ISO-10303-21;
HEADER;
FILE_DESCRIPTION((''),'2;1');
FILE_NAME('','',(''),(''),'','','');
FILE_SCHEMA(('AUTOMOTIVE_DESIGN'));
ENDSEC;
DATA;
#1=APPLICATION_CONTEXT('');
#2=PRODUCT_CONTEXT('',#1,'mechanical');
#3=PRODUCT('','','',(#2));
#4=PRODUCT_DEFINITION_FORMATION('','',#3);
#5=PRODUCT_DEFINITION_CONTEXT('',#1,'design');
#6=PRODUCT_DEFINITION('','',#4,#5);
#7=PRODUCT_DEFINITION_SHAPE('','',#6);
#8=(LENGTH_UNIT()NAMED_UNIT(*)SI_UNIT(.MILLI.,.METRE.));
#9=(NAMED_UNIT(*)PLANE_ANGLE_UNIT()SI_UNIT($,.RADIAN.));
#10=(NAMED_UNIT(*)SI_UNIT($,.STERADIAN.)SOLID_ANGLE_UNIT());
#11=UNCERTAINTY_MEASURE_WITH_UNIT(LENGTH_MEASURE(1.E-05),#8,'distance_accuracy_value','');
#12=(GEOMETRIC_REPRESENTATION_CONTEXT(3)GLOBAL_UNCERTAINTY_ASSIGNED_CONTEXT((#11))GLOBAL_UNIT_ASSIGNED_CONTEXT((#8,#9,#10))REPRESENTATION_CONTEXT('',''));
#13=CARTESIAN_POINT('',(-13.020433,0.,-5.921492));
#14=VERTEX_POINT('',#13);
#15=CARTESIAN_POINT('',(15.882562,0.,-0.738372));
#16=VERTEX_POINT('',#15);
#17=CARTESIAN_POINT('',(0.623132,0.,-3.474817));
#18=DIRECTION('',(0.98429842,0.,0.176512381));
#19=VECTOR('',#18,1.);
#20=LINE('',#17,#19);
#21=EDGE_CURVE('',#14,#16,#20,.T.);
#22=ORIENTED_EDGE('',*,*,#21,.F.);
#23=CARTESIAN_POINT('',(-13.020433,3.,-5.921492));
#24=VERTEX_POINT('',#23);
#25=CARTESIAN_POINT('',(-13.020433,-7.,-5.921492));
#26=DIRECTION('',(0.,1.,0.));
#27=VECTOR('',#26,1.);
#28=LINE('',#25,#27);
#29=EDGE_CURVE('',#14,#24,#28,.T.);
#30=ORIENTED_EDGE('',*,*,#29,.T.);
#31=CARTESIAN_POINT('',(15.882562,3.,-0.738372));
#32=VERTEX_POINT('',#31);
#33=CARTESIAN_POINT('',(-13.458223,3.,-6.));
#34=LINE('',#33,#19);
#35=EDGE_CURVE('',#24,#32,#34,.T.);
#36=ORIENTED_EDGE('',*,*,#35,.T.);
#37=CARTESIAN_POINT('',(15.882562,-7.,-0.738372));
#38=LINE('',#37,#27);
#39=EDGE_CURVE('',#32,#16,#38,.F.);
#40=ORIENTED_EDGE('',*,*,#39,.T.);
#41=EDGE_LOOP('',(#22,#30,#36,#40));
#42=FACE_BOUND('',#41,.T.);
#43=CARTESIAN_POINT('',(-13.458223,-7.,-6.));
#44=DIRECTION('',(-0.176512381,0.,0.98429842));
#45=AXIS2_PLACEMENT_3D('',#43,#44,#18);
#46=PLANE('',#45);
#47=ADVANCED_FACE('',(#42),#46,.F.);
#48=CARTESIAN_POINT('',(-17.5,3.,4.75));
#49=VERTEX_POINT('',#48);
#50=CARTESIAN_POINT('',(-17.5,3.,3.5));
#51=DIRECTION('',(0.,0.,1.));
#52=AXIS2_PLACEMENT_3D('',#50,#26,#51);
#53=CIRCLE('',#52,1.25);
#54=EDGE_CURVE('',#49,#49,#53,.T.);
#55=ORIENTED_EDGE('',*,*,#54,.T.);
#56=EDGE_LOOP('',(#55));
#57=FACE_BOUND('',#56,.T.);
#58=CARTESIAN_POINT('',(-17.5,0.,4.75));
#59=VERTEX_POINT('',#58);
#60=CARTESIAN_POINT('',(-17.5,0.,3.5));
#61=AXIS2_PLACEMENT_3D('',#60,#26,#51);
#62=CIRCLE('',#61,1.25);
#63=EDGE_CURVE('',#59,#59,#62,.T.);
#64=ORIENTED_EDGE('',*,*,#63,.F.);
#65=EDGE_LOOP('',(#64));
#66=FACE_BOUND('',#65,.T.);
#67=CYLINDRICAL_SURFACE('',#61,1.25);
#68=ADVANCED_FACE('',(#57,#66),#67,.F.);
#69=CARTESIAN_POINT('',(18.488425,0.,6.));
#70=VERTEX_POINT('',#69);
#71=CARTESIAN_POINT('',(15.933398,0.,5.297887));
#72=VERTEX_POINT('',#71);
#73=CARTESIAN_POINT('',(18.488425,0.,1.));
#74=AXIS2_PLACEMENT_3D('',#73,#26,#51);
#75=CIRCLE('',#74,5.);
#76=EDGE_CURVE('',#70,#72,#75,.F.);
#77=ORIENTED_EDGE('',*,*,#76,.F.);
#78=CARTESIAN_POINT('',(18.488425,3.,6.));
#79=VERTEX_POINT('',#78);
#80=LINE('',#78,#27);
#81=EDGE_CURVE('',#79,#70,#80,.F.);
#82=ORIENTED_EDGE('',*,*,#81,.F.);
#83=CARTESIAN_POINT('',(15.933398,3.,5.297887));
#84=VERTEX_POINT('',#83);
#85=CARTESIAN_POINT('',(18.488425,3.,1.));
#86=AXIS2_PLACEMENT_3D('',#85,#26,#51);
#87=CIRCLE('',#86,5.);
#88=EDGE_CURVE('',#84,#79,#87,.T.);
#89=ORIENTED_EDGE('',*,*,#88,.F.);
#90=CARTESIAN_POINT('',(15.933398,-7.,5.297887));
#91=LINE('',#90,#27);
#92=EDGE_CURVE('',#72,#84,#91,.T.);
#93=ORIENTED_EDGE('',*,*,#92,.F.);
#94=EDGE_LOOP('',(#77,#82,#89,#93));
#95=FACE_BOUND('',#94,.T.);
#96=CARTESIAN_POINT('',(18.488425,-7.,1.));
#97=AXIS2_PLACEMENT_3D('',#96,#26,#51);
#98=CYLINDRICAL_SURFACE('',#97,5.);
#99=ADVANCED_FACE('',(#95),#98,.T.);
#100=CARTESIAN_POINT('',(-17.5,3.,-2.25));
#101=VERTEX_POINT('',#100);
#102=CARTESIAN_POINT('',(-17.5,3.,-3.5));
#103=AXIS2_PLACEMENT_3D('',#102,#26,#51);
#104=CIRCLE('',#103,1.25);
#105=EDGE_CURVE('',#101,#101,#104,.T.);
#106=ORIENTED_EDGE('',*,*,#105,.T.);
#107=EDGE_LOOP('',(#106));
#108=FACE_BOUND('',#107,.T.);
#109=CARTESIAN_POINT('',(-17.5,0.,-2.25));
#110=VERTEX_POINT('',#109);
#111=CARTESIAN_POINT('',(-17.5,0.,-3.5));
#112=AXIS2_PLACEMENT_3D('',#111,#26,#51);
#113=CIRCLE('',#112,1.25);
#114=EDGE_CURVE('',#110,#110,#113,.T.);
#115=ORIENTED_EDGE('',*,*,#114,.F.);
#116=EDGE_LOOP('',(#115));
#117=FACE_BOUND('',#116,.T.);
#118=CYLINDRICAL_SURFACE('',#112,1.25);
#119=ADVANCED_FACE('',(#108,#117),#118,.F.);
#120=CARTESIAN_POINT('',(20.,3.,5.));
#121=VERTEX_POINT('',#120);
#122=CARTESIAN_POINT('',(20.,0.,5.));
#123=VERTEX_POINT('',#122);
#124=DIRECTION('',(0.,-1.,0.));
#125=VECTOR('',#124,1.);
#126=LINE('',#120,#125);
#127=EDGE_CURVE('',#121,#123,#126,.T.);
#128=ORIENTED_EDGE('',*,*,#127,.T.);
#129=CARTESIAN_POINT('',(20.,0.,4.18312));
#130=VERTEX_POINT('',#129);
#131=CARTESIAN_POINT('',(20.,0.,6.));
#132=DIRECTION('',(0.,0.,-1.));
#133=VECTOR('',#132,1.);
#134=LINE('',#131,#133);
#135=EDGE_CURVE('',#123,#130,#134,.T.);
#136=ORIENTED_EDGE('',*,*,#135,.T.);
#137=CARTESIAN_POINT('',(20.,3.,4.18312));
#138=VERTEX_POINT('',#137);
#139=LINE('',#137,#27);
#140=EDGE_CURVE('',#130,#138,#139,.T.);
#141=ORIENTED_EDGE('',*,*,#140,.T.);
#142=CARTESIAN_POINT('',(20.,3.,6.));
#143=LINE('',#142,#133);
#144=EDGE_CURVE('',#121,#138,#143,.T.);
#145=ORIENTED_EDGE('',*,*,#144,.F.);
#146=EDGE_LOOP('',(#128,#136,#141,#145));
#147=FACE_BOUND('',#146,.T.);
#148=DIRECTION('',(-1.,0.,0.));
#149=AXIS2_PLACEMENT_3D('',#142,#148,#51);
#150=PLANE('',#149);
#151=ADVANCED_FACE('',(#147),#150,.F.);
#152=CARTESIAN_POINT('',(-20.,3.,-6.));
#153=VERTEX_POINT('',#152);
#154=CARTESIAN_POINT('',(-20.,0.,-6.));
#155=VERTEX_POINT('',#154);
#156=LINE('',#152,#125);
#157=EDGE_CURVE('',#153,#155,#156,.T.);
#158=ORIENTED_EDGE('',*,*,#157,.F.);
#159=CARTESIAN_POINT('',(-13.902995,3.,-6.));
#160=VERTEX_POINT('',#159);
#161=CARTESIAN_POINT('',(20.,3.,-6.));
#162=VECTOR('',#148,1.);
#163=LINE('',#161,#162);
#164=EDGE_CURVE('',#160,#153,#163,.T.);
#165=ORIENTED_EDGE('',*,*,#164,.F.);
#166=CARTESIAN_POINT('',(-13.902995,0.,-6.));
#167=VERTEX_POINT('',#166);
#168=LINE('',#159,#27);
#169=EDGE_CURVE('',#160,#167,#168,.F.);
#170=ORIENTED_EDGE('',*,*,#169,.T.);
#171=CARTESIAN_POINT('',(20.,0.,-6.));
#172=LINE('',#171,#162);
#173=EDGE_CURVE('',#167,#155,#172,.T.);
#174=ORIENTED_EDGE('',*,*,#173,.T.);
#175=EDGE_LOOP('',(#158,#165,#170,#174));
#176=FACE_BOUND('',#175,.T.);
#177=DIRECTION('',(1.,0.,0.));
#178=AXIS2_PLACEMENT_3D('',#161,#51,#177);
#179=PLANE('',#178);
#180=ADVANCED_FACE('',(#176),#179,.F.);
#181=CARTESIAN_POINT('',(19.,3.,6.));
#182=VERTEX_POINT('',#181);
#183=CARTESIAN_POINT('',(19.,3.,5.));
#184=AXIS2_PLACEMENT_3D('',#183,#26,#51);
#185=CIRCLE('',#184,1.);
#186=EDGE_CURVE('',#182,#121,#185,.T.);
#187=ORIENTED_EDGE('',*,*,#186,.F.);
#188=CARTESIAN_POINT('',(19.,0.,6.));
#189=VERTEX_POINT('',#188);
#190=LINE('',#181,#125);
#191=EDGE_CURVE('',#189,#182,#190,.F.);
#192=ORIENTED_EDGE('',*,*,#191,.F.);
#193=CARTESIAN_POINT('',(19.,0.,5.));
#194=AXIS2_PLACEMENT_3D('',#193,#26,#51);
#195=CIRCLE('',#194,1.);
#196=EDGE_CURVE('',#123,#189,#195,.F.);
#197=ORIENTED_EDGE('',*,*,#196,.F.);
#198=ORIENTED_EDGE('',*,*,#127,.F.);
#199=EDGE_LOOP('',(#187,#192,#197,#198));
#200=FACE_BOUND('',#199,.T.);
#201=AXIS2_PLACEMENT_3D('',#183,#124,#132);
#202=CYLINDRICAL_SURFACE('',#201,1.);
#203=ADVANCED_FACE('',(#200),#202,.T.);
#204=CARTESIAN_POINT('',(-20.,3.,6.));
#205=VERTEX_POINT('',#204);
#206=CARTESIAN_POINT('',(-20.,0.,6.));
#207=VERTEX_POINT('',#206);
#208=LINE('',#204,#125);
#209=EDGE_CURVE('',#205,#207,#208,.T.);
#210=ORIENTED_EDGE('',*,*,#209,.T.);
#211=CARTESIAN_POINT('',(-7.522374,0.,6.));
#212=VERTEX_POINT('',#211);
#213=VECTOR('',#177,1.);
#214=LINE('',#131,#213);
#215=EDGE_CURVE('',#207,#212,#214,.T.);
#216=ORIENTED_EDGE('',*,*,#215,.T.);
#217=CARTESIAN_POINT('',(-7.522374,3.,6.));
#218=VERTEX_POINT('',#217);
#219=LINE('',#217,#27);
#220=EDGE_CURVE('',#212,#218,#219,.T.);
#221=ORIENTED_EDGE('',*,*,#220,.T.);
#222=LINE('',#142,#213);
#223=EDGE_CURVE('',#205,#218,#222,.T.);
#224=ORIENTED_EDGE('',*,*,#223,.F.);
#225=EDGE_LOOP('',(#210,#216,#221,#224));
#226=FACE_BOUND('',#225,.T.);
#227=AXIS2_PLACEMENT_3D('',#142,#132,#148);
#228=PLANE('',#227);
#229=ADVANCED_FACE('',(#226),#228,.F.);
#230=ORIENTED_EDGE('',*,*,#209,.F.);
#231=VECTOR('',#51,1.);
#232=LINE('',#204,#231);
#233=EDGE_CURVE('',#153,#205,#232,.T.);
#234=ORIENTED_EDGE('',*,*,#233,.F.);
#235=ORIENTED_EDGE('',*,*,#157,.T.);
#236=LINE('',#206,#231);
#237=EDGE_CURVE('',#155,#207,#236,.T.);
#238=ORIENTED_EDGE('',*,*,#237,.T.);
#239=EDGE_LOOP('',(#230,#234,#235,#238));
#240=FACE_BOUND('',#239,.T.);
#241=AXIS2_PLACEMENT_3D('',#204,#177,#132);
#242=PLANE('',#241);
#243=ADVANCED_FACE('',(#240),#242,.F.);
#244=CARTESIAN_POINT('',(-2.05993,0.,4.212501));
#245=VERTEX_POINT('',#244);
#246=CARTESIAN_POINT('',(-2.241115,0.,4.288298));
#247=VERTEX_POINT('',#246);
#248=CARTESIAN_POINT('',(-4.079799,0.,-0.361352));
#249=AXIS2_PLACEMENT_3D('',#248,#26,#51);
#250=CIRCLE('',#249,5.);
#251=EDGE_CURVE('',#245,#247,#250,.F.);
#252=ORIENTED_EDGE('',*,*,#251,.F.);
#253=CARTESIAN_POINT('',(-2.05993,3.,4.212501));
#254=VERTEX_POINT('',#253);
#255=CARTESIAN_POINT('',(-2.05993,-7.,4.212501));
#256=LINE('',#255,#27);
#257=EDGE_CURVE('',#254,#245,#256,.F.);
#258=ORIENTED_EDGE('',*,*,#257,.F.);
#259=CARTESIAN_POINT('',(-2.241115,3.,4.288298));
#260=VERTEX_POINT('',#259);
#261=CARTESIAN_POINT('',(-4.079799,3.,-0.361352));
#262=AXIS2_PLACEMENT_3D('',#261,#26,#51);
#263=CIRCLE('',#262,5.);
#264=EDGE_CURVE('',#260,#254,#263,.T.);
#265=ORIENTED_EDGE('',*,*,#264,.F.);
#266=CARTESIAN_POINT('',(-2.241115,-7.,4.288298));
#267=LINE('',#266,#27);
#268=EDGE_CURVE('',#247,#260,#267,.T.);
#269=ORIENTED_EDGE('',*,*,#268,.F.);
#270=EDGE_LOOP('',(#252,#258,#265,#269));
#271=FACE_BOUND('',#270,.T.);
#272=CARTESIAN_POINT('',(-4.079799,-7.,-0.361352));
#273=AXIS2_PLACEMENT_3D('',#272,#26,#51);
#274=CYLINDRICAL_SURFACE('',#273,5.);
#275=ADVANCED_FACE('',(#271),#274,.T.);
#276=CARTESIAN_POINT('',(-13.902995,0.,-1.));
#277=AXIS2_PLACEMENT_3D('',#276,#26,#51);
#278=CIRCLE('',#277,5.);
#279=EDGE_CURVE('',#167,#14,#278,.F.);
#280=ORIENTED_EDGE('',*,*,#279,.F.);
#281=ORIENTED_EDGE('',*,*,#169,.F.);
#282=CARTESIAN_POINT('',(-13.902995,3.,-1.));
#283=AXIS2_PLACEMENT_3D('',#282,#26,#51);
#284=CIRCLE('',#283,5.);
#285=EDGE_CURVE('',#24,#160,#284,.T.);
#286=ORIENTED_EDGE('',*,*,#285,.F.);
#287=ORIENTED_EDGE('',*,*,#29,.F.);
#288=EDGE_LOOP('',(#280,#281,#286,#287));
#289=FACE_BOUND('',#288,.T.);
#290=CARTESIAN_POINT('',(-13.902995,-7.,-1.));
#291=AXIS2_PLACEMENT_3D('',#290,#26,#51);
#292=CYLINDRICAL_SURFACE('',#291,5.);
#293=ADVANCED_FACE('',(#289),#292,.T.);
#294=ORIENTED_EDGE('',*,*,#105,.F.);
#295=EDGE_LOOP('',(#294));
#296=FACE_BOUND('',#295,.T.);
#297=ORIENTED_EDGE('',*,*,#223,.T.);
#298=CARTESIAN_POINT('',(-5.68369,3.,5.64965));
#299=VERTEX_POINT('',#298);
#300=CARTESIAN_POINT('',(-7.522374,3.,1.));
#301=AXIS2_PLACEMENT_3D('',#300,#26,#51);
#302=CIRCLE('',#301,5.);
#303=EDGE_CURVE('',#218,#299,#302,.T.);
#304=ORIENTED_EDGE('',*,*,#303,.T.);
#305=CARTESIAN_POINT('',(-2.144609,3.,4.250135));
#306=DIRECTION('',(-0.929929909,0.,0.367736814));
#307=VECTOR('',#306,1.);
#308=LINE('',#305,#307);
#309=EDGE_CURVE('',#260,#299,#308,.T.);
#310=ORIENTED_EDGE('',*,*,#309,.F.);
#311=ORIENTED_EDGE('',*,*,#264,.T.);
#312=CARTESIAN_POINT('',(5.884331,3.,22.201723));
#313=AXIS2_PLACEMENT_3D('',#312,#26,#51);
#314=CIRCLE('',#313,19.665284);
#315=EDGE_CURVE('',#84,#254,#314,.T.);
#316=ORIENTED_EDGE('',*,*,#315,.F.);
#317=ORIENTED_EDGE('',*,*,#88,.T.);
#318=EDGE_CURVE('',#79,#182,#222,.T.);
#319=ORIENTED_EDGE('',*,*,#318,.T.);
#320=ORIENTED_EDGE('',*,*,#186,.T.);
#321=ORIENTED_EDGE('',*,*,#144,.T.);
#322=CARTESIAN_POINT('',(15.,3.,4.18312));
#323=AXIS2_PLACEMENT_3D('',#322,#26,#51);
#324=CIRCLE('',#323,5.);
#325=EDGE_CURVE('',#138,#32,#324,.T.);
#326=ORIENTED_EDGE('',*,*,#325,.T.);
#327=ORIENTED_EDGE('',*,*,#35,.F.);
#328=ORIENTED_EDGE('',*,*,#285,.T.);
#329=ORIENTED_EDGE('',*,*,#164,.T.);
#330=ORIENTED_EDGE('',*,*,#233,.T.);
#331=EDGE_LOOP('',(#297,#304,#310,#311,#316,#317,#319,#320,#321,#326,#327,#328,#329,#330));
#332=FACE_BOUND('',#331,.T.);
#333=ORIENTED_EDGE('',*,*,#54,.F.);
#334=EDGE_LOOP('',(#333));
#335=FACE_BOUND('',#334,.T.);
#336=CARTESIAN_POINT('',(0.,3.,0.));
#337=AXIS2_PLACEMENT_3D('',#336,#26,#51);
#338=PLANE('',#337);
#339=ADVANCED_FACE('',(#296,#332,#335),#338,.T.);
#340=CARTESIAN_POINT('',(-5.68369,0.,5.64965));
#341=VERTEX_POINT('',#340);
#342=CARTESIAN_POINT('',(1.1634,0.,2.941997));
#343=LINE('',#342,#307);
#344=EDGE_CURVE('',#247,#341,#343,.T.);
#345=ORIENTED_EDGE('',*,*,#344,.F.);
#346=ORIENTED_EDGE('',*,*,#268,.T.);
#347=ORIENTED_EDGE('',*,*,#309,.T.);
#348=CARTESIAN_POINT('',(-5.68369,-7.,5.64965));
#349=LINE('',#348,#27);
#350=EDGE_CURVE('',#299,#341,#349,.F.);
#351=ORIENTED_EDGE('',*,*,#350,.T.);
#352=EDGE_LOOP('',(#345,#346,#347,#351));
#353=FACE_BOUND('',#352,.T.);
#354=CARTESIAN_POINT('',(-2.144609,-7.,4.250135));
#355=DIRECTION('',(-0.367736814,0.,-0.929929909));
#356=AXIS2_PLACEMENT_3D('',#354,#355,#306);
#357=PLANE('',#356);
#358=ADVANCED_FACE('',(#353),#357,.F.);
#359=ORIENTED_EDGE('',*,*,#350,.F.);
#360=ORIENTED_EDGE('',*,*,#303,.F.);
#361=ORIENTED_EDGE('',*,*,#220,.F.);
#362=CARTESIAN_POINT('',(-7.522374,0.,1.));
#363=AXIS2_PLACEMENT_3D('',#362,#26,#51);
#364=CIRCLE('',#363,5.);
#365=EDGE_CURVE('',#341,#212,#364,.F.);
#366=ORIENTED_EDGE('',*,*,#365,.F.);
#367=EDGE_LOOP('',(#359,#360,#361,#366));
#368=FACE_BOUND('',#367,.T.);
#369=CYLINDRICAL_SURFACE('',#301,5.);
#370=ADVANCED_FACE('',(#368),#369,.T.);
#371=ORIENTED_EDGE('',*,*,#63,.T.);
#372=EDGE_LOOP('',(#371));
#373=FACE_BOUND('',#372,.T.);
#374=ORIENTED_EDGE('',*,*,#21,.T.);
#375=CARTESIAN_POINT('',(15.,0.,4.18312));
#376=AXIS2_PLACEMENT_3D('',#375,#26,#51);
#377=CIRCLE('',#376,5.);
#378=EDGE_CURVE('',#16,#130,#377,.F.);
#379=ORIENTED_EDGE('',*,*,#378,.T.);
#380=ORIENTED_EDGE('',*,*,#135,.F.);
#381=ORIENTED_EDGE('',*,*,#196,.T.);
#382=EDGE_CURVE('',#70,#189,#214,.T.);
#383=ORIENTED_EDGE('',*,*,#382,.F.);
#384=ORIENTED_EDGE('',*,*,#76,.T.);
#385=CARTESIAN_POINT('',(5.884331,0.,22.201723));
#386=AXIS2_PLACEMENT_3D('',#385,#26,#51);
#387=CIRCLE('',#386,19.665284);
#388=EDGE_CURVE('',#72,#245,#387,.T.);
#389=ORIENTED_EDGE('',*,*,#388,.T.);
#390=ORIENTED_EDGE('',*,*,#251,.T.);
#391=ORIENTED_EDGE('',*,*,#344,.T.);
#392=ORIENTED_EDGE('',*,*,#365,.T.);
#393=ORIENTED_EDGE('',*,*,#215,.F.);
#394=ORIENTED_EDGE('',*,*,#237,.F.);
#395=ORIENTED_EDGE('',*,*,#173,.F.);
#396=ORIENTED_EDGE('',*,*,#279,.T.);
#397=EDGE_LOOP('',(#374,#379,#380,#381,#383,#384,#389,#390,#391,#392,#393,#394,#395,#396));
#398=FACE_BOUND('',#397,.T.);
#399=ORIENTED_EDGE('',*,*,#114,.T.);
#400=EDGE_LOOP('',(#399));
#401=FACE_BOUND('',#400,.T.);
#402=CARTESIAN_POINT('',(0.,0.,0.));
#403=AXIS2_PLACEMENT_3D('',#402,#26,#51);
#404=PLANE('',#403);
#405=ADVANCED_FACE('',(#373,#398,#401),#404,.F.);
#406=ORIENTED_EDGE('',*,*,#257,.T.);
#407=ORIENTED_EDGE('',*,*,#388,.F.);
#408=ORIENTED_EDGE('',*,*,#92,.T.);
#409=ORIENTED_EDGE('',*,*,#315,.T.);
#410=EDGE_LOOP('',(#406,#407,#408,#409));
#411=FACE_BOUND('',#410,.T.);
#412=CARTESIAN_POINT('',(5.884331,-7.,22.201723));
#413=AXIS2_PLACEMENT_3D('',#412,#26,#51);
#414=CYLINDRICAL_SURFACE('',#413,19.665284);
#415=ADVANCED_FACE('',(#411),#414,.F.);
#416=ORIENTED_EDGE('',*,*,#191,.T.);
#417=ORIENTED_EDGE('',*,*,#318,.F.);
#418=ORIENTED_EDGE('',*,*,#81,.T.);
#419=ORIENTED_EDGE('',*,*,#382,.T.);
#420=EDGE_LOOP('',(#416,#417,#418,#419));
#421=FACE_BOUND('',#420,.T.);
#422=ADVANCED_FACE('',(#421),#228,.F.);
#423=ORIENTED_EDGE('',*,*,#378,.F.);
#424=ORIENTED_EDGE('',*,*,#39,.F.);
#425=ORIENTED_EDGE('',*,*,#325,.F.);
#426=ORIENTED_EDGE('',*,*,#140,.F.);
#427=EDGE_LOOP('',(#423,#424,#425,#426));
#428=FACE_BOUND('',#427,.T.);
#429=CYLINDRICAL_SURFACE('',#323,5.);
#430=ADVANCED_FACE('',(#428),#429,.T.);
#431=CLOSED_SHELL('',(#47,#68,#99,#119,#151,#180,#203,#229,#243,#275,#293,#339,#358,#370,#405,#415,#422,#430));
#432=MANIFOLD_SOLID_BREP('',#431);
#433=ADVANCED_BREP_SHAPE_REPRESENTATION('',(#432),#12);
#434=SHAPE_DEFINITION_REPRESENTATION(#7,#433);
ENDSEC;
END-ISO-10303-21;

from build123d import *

# Parameters (mm, degrees)
SKETCH1_W           = 40
SKETCH1_H           = 12
BOSS_EXTRUDE1_DEPTH = 3
SKETCH3_R           = 1.25
CUT_EXTRUDE2_DEPTH  = 22.09502311
CUT_EXTRUDE3_DEPTH  = 10
FILLET2_R           = 5
FILLET3_R           = 1
FILLET4_R           = 5
FILLET5_R           = 5


with BuildPart() as part:
    # Sketch1 → Boss-Extrude1 (new body)
    with BuildSketch(Plane(origin=(0, 0, 0), x_dir=(1, 0, 0), z_dir=(0, 1, 0))):
        Rectangle(SKETCH1_W, SKETCH1_H)
    extrude(amount=BOSS_EXTRUDE1_DEPTH)

    # Sketch3 → Cut-Extrude2 (cut, through all)
    with BuildSketch(Plane(origin=(0, 3, 0), x_dir=(1, 0, 0), z_dir=(0, 1, 0))):
        with Locations(Location((-17.5, 3.5, 0), (0, 0, 270))):
            Circle(SKETCH3_R)
        with Locations(Location((-17.5, -3.5, 0), (0, 0, 270))):
            Circle(SKETCH3_R)
    extrude(amount=-CUT_EXTRUDE2_DEPTH, mode=Mode.SUBTRACT)

    # Sketch5 → Cut-Extrude3 (cut)
    with BuildSketch(Plane(origin=(0, 3, 0), x_dir=(1, 0, 0), z_dir=(0, 1, 0))):
        with BuildLine():
            Line((-13.458222524, 6), (20, 0))
            Line((20, 0), (20, -6))
            Line((20, -6), (17.030073052, -6))
            ThreePointArc((17.030073052, -6), (7.671541519, -2.617819669), (-2.144608615, -4.250134828))
            Line((-2.144608615, -4.250134828), (-6.569653649, -6))
            Line((-6.569653649, -6), (-13.458222524, -6))
            Line((-13.458222524, -6), (-13.458222524, -10.237178745))
            Line((-13.458222524, -10.237178745), (26.023482417, -9.726914384))
            Line((26.023482417, -9.726914384), (26.023482417, 8.477274399))
            Line((26.023482417, 8.477274399), (-13.458222524, 8.477274399))
            Line((-13.458222524, 8.477274399), (-13.458222524, 6))
        make_face()
    extrude(amount=-CUT_EXTRUDE3_DEPTH, mode=Mode.SUBTRACT)

    # Fillet2
    # the kernel refuses this fillet: 5 mm, written as the material it takes off along each edge
    with BuildSketch(Plane(origin=(-6.569653649, 5.381801612, 6), x_dir=(-1, 0, 0), z_dir=(0, -1, 0))) as fillet2_piece_1:
        with BuildLine():
            CenterArc((FILLET2_R * 0.190544128998, FILLET2_R), FILLET2_R, 248.423891744, 21.576108256)
            Line((-FILLET2_R * 0.17719268457, FILLET2_R * 0.0700700908417), (0, 0))
            Line((0, 0), (FILLET2_R * 0.190544128998, 0))
        make_face()
    extrude(amount=7.763603225, mode=Mode.SUBTRACT)
    with BuildSketch(Plane(origin=(-2.144608615, 3.259446384, 4.250134828), x_dir=(-0.9299299091583175, 0, 0.36773681356753396), z_dir=(0, -1, 0))) as fillet2_piece_2:
        with BuildLine():
            CenterArc((0.103778554, 5), FILLET2_R, 267.749266862, 2.250733138)
            ThreePointArc((-0.092584454, 0.003857331), (-0.046289955, 0.001983199), (0, 0))
            Line((0, 0), (0.103778554, 0))
        make_face()
    extrude(amount=3.518892769, mode=Mode.SUBTRACT)
    with BuildSketch(Plane(origin=(17.030073052, 6.64587884, 6), x_dir=(1, 0, 0), z_dir=(0, -1, 0))) as fillet2_piece_3:
        with BuildLine():
            CenterArc((1.458351536, -5), FILLET2_R, 90, 30.730822568)
            ThreePointArc((-1.096675494, -0.70211251), (-0.542524687, -0.360136055), (0, 0))
            Line((0, 0), (1.458351536, 0))
        make_face()
    extrude(amount=10.291757681, mode=Mode.SUBTRACT)

    # Fillet3
    fillet3_edges = [part.edges().sort_by_distance(p)[0] for p in [
        (20, 1.5, 6),
    ]]
    fillet(fillet3_edges, radius=FILLET3_R)

    # Fillet4
    fillet4_edges = [part.edges().sort_by_distance(p)[0] for p in [
        (20, 1.5, 0),
    ]]
    fillet(fillet4_edges, radius=FILLET4_R)

    # Fillet5
    fillet5_edges = [part.edges().sort_by_distance(p)[0] for p in [
        (-13.458222524, 1.5, -6),
    ]]
    fillet(fillet5_edges, radius=FILLET5_R)


solid = part.part
